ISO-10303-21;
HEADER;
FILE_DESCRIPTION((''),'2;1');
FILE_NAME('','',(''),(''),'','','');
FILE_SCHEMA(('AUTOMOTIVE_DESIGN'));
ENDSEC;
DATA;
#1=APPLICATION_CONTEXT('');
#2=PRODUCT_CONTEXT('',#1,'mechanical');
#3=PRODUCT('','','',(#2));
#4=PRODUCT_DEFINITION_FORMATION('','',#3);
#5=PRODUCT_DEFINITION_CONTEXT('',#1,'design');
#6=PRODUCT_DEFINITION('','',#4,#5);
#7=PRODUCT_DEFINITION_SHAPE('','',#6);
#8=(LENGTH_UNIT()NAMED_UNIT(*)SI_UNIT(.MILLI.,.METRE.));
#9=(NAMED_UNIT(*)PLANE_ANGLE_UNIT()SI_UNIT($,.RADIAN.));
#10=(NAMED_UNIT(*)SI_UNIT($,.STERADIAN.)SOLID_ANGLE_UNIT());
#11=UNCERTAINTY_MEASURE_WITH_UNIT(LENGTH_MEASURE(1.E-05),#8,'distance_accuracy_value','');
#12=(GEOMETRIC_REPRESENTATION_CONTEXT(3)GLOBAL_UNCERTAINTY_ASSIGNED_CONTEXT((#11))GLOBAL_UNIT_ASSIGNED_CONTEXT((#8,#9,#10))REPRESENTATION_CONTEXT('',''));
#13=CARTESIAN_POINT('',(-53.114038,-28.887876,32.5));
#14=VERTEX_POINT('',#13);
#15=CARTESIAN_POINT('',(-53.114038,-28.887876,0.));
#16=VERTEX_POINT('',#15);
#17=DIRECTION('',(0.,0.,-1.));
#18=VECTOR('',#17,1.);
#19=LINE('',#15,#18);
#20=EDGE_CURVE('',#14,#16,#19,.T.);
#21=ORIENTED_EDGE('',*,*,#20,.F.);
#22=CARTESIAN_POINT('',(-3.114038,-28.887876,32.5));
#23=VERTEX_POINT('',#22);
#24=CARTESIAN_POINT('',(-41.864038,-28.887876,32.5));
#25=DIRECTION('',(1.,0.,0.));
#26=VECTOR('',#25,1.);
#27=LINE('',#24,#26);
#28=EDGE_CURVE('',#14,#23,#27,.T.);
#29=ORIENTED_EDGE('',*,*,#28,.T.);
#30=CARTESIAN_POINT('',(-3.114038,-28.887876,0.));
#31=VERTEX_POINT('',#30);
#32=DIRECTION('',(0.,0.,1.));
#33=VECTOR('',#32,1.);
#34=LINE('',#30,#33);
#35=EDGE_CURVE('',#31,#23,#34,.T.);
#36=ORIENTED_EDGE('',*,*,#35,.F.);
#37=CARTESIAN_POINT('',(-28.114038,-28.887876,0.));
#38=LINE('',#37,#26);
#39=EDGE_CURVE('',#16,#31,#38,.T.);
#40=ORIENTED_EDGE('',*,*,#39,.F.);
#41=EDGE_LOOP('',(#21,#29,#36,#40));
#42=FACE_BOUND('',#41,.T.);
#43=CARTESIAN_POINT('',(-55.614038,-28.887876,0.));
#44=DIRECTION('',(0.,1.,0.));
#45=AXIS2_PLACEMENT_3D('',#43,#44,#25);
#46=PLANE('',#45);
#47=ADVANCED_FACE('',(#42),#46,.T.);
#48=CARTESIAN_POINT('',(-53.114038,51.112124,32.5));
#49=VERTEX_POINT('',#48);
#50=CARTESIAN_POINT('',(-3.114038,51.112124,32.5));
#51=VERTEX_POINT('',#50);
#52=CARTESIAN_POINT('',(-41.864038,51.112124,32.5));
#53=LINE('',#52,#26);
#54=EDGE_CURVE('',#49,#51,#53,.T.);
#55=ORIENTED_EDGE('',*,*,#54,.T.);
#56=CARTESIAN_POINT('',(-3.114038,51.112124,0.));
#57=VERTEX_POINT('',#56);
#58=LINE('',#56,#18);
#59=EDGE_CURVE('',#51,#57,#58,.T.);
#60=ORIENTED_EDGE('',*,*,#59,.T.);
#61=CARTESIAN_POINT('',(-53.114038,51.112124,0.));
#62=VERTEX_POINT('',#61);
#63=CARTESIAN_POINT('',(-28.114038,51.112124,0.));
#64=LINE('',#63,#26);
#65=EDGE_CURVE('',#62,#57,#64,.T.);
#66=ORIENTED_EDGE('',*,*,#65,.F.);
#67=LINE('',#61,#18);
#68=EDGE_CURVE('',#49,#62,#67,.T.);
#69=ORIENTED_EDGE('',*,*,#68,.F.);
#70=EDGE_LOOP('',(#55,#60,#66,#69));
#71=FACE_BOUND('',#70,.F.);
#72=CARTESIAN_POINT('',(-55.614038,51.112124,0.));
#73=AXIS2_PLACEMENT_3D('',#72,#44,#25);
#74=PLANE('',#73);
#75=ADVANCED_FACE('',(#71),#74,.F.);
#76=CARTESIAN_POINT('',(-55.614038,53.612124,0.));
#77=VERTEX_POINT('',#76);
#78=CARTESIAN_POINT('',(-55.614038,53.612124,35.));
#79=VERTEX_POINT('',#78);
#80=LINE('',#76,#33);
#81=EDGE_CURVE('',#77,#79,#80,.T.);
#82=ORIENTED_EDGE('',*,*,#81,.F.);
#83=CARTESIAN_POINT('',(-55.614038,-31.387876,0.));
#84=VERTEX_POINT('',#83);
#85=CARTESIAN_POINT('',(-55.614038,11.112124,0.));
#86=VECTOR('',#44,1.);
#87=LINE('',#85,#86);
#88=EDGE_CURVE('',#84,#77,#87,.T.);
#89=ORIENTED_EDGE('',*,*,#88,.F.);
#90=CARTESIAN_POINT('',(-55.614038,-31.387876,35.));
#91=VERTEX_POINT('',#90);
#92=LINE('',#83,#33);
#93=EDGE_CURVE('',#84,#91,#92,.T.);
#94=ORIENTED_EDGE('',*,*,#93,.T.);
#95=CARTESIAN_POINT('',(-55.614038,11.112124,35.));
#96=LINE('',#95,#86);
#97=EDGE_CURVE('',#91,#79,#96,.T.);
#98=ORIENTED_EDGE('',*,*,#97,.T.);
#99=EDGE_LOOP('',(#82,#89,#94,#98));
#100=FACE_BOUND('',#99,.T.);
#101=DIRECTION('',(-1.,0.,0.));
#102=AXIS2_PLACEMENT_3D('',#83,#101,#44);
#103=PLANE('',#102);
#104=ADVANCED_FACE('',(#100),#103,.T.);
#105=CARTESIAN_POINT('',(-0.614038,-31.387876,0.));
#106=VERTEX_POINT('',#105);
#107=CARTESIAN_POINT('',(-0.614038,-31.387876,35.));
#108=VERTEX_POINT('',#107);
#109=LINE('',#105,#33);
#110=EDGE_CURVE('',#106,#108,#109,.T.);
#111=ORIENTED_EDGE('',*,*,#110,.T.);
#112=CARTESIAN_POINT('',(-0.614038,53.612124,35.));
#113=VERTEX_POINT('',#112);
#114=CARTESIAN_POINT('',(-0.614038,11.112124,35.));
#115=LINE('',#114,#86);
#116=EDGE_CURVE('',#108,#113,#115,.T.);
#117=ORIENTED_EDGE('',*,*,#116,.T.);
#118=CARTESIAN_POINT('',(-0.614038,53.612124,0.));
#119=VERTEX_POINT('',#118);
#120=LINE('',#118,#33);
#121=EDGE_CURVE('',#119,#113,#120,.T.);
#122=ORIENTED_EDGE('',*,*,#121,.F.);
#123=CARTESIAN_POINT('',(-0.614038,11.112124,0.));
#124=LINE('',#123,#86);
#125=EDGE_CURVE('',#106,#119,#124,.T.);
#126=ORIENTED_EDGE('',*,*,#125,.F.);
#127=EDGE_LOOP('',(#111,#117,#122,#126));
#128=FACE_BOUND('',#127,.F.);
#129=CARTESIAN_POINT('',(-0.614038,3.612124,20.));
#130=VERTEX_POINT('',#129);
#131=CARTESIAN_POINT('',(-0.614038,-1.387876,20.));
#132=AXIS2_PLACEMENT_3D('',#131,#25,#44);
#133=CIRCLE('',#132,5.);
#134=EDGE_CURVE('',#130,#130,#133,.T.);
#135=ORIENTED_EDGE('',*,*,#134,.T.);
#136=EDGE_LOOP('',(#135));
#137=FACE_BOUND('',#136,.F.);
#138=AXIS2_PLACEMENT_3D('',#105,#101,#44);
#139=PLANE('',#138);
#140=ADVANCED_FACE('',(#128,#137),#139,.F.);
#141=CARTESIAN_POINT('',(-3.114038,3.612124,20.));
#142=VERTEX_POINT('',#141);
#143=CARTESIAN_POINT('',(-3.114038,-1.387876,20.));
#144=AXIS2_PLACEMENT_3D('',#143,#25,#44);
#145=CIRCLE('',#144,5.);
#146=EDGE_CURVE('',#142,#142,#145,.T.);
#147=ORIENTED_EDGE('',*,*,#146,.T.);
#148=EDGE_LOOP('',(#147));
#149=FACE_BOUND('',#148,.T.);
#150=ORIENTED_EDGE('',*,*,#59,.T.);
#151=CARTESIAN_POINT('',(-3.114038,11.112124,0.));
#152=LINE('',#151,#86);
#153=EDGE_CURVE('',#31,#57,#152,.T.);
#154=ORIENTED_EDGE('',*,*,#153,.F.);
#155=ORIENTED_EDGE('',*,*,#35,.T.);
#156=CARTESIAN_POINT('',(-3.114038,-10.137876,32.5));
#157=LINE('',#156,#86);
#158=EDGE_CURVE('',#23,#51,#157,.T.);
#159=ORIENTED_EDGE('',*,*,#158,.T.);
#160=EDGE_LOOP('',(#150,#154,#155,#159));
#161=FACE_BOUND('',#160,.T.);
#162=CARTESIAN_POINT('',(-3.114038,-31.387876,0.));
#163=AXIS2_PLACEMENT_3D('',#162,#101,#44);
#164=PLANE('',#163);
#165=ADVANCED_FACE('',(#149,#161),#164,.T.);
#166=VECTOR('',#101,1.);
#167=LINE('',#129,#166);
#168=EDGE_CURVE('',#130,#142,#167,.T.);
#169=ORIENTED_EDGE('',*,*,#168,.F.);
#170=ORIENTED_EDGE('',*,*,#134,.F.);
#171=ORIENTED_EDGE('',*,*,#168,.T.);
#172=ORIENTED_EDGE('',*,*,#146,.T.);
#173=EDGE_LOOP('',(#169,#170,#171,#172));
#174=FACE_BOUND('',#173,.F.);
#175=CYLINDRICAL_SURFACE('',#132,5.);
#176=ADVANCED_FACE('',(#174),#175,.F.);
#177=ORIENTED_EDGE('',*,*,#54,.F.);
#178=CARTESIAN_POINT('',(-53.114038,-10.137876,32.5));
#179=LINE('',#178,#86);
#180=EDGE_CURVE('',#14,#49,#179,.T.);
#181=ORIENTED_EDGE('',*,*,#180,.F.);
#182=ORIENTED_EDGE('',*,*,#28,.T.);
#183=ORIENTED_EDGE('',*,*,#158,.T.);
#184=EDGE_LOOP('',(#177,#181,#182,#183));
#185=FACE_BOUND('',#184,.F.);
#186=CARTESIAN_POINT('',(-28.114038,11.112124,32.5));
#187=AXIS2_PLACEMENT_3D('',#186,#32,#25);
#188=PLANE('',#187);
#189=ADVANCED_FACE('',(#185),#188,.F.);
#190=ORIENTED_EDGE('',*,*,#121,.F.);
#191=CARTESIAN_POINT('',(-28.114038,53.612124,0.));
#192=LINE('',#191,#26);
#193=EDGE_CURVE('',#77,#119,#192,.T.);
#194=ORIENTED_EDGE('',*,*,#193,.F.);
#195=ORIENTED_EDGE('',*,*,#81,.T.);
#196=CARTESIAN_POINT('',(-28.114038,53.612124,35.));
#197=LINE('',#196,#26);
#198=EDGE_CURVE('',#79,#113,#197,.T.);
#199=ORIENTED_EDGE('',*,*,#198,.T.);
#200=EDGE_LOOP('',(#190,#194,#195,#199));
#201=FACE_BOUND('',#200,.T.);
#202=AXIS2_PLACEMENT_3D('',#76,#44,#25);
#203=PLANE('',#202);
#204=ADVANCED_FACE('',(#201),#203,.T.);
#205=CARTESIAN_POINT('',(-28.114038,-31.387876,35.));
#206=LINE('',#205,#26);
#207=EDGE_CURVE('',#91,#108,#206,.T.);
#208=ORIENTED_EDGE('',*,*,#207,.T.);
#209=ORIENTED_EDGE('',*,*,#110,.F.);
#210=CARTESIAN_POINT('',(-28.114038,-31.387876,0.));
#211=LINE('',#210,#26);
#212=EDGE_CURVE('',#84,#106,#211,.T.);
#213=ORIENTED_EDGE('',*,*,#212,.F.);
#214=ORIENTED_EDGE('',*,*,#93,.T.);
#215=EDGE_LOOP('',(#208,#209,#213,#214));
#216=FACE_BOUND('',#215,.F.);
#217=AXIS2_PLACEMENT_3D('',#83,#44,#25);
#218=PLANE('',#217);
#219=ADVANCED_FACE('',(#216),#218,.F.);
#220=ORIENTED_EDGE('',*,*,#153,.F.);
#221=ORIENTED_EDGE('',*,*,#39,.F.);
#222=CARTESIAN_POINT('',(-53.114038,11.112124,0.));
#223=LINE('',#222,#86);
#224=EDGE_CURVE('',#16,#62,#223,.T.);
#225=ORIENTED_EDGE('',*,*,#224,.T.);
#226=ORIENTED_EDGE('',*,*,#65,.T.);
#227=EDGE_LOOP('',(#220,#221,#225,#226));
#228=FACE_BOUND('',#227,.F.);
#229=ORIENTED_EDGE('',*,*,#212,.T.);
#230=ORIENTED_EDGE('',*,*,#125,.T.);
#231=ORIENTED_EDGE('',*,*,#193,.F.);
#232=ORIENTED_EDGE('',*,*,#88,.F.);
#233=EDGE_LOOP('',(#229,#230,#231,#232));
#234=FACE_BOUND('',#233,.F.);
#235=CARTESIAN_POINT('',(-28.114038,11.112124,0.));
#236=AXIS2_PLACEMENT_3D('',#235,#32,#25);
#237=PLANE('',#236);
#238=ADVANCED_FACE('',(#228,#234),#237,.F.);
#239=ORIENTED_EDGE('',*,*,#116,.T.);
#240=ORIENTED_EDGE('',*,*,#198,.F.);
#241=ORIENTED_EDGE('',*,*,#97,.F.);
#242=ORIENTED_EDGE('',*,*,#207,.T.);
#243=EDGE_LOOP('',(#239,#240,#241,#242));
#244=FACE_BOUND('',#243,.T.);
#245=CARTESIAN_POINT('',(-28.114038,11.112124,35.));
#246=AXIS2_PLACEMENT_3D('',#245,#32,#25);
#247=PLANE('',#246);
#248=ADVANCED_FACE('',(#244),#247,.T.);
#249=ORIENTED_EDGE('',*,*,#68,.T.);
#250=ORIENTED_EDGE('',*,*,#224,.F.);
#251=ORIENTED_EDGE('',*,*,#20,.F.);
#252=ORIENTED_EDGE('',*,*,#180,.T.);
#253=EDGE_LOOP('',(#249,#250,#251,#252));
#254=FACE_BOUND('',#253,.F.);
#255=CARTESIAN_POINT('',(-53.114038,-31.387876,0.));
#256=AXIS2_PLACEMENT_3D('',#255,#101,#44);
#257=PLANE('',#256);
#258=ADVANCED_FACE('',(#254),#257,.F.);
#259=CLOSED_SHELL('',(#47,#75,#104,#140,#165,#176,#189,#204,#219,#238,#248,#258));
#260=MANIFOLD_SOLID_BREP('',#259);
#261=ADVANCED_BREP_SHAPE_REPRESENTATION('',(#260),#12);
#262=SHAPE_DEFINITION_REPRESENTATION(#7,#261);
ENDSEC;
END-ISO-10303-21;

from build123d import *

# Parameters (mm, degrees)
F0_W     = 55
F0_H     = 85
F1_DEPTH = 35
F3_T     = -2.5
F4_R     = 5
F5_DEPTH = 25


# Not quite as in the source:
# - the program builds the solid bodies; features that only make, move or delete a surface that nothing else refers to are left out


with BuildPart() as f1:
    # F0 (on Top) → F1 (new body)
    with BuildSketch(Plane.XY):
        with Locations((-28.1140384175, 11.1121237278)):
            Rectangle(F0_W, F0_H)
    extrude(amount=F1_DEPTH)

    # F3
    f3_openings = [f1.faces().sort_by_distance(p)[0] for p in [
        (-28.114038, 11.112124, 0),
    ]]
    offset(amount=F3_T, openings=f3_openings)

    # F4 (on face) → F5 (cut)
    with BuildSketch(Plane.YZ.offset(-0.6140384175)):
        with Locations((-1.3878762722, 20)):
            Circle(F4_R)
    extrude(amount=-F5_DEPTH, mode=Mode.SUBTRACT)


solid = f1.part
